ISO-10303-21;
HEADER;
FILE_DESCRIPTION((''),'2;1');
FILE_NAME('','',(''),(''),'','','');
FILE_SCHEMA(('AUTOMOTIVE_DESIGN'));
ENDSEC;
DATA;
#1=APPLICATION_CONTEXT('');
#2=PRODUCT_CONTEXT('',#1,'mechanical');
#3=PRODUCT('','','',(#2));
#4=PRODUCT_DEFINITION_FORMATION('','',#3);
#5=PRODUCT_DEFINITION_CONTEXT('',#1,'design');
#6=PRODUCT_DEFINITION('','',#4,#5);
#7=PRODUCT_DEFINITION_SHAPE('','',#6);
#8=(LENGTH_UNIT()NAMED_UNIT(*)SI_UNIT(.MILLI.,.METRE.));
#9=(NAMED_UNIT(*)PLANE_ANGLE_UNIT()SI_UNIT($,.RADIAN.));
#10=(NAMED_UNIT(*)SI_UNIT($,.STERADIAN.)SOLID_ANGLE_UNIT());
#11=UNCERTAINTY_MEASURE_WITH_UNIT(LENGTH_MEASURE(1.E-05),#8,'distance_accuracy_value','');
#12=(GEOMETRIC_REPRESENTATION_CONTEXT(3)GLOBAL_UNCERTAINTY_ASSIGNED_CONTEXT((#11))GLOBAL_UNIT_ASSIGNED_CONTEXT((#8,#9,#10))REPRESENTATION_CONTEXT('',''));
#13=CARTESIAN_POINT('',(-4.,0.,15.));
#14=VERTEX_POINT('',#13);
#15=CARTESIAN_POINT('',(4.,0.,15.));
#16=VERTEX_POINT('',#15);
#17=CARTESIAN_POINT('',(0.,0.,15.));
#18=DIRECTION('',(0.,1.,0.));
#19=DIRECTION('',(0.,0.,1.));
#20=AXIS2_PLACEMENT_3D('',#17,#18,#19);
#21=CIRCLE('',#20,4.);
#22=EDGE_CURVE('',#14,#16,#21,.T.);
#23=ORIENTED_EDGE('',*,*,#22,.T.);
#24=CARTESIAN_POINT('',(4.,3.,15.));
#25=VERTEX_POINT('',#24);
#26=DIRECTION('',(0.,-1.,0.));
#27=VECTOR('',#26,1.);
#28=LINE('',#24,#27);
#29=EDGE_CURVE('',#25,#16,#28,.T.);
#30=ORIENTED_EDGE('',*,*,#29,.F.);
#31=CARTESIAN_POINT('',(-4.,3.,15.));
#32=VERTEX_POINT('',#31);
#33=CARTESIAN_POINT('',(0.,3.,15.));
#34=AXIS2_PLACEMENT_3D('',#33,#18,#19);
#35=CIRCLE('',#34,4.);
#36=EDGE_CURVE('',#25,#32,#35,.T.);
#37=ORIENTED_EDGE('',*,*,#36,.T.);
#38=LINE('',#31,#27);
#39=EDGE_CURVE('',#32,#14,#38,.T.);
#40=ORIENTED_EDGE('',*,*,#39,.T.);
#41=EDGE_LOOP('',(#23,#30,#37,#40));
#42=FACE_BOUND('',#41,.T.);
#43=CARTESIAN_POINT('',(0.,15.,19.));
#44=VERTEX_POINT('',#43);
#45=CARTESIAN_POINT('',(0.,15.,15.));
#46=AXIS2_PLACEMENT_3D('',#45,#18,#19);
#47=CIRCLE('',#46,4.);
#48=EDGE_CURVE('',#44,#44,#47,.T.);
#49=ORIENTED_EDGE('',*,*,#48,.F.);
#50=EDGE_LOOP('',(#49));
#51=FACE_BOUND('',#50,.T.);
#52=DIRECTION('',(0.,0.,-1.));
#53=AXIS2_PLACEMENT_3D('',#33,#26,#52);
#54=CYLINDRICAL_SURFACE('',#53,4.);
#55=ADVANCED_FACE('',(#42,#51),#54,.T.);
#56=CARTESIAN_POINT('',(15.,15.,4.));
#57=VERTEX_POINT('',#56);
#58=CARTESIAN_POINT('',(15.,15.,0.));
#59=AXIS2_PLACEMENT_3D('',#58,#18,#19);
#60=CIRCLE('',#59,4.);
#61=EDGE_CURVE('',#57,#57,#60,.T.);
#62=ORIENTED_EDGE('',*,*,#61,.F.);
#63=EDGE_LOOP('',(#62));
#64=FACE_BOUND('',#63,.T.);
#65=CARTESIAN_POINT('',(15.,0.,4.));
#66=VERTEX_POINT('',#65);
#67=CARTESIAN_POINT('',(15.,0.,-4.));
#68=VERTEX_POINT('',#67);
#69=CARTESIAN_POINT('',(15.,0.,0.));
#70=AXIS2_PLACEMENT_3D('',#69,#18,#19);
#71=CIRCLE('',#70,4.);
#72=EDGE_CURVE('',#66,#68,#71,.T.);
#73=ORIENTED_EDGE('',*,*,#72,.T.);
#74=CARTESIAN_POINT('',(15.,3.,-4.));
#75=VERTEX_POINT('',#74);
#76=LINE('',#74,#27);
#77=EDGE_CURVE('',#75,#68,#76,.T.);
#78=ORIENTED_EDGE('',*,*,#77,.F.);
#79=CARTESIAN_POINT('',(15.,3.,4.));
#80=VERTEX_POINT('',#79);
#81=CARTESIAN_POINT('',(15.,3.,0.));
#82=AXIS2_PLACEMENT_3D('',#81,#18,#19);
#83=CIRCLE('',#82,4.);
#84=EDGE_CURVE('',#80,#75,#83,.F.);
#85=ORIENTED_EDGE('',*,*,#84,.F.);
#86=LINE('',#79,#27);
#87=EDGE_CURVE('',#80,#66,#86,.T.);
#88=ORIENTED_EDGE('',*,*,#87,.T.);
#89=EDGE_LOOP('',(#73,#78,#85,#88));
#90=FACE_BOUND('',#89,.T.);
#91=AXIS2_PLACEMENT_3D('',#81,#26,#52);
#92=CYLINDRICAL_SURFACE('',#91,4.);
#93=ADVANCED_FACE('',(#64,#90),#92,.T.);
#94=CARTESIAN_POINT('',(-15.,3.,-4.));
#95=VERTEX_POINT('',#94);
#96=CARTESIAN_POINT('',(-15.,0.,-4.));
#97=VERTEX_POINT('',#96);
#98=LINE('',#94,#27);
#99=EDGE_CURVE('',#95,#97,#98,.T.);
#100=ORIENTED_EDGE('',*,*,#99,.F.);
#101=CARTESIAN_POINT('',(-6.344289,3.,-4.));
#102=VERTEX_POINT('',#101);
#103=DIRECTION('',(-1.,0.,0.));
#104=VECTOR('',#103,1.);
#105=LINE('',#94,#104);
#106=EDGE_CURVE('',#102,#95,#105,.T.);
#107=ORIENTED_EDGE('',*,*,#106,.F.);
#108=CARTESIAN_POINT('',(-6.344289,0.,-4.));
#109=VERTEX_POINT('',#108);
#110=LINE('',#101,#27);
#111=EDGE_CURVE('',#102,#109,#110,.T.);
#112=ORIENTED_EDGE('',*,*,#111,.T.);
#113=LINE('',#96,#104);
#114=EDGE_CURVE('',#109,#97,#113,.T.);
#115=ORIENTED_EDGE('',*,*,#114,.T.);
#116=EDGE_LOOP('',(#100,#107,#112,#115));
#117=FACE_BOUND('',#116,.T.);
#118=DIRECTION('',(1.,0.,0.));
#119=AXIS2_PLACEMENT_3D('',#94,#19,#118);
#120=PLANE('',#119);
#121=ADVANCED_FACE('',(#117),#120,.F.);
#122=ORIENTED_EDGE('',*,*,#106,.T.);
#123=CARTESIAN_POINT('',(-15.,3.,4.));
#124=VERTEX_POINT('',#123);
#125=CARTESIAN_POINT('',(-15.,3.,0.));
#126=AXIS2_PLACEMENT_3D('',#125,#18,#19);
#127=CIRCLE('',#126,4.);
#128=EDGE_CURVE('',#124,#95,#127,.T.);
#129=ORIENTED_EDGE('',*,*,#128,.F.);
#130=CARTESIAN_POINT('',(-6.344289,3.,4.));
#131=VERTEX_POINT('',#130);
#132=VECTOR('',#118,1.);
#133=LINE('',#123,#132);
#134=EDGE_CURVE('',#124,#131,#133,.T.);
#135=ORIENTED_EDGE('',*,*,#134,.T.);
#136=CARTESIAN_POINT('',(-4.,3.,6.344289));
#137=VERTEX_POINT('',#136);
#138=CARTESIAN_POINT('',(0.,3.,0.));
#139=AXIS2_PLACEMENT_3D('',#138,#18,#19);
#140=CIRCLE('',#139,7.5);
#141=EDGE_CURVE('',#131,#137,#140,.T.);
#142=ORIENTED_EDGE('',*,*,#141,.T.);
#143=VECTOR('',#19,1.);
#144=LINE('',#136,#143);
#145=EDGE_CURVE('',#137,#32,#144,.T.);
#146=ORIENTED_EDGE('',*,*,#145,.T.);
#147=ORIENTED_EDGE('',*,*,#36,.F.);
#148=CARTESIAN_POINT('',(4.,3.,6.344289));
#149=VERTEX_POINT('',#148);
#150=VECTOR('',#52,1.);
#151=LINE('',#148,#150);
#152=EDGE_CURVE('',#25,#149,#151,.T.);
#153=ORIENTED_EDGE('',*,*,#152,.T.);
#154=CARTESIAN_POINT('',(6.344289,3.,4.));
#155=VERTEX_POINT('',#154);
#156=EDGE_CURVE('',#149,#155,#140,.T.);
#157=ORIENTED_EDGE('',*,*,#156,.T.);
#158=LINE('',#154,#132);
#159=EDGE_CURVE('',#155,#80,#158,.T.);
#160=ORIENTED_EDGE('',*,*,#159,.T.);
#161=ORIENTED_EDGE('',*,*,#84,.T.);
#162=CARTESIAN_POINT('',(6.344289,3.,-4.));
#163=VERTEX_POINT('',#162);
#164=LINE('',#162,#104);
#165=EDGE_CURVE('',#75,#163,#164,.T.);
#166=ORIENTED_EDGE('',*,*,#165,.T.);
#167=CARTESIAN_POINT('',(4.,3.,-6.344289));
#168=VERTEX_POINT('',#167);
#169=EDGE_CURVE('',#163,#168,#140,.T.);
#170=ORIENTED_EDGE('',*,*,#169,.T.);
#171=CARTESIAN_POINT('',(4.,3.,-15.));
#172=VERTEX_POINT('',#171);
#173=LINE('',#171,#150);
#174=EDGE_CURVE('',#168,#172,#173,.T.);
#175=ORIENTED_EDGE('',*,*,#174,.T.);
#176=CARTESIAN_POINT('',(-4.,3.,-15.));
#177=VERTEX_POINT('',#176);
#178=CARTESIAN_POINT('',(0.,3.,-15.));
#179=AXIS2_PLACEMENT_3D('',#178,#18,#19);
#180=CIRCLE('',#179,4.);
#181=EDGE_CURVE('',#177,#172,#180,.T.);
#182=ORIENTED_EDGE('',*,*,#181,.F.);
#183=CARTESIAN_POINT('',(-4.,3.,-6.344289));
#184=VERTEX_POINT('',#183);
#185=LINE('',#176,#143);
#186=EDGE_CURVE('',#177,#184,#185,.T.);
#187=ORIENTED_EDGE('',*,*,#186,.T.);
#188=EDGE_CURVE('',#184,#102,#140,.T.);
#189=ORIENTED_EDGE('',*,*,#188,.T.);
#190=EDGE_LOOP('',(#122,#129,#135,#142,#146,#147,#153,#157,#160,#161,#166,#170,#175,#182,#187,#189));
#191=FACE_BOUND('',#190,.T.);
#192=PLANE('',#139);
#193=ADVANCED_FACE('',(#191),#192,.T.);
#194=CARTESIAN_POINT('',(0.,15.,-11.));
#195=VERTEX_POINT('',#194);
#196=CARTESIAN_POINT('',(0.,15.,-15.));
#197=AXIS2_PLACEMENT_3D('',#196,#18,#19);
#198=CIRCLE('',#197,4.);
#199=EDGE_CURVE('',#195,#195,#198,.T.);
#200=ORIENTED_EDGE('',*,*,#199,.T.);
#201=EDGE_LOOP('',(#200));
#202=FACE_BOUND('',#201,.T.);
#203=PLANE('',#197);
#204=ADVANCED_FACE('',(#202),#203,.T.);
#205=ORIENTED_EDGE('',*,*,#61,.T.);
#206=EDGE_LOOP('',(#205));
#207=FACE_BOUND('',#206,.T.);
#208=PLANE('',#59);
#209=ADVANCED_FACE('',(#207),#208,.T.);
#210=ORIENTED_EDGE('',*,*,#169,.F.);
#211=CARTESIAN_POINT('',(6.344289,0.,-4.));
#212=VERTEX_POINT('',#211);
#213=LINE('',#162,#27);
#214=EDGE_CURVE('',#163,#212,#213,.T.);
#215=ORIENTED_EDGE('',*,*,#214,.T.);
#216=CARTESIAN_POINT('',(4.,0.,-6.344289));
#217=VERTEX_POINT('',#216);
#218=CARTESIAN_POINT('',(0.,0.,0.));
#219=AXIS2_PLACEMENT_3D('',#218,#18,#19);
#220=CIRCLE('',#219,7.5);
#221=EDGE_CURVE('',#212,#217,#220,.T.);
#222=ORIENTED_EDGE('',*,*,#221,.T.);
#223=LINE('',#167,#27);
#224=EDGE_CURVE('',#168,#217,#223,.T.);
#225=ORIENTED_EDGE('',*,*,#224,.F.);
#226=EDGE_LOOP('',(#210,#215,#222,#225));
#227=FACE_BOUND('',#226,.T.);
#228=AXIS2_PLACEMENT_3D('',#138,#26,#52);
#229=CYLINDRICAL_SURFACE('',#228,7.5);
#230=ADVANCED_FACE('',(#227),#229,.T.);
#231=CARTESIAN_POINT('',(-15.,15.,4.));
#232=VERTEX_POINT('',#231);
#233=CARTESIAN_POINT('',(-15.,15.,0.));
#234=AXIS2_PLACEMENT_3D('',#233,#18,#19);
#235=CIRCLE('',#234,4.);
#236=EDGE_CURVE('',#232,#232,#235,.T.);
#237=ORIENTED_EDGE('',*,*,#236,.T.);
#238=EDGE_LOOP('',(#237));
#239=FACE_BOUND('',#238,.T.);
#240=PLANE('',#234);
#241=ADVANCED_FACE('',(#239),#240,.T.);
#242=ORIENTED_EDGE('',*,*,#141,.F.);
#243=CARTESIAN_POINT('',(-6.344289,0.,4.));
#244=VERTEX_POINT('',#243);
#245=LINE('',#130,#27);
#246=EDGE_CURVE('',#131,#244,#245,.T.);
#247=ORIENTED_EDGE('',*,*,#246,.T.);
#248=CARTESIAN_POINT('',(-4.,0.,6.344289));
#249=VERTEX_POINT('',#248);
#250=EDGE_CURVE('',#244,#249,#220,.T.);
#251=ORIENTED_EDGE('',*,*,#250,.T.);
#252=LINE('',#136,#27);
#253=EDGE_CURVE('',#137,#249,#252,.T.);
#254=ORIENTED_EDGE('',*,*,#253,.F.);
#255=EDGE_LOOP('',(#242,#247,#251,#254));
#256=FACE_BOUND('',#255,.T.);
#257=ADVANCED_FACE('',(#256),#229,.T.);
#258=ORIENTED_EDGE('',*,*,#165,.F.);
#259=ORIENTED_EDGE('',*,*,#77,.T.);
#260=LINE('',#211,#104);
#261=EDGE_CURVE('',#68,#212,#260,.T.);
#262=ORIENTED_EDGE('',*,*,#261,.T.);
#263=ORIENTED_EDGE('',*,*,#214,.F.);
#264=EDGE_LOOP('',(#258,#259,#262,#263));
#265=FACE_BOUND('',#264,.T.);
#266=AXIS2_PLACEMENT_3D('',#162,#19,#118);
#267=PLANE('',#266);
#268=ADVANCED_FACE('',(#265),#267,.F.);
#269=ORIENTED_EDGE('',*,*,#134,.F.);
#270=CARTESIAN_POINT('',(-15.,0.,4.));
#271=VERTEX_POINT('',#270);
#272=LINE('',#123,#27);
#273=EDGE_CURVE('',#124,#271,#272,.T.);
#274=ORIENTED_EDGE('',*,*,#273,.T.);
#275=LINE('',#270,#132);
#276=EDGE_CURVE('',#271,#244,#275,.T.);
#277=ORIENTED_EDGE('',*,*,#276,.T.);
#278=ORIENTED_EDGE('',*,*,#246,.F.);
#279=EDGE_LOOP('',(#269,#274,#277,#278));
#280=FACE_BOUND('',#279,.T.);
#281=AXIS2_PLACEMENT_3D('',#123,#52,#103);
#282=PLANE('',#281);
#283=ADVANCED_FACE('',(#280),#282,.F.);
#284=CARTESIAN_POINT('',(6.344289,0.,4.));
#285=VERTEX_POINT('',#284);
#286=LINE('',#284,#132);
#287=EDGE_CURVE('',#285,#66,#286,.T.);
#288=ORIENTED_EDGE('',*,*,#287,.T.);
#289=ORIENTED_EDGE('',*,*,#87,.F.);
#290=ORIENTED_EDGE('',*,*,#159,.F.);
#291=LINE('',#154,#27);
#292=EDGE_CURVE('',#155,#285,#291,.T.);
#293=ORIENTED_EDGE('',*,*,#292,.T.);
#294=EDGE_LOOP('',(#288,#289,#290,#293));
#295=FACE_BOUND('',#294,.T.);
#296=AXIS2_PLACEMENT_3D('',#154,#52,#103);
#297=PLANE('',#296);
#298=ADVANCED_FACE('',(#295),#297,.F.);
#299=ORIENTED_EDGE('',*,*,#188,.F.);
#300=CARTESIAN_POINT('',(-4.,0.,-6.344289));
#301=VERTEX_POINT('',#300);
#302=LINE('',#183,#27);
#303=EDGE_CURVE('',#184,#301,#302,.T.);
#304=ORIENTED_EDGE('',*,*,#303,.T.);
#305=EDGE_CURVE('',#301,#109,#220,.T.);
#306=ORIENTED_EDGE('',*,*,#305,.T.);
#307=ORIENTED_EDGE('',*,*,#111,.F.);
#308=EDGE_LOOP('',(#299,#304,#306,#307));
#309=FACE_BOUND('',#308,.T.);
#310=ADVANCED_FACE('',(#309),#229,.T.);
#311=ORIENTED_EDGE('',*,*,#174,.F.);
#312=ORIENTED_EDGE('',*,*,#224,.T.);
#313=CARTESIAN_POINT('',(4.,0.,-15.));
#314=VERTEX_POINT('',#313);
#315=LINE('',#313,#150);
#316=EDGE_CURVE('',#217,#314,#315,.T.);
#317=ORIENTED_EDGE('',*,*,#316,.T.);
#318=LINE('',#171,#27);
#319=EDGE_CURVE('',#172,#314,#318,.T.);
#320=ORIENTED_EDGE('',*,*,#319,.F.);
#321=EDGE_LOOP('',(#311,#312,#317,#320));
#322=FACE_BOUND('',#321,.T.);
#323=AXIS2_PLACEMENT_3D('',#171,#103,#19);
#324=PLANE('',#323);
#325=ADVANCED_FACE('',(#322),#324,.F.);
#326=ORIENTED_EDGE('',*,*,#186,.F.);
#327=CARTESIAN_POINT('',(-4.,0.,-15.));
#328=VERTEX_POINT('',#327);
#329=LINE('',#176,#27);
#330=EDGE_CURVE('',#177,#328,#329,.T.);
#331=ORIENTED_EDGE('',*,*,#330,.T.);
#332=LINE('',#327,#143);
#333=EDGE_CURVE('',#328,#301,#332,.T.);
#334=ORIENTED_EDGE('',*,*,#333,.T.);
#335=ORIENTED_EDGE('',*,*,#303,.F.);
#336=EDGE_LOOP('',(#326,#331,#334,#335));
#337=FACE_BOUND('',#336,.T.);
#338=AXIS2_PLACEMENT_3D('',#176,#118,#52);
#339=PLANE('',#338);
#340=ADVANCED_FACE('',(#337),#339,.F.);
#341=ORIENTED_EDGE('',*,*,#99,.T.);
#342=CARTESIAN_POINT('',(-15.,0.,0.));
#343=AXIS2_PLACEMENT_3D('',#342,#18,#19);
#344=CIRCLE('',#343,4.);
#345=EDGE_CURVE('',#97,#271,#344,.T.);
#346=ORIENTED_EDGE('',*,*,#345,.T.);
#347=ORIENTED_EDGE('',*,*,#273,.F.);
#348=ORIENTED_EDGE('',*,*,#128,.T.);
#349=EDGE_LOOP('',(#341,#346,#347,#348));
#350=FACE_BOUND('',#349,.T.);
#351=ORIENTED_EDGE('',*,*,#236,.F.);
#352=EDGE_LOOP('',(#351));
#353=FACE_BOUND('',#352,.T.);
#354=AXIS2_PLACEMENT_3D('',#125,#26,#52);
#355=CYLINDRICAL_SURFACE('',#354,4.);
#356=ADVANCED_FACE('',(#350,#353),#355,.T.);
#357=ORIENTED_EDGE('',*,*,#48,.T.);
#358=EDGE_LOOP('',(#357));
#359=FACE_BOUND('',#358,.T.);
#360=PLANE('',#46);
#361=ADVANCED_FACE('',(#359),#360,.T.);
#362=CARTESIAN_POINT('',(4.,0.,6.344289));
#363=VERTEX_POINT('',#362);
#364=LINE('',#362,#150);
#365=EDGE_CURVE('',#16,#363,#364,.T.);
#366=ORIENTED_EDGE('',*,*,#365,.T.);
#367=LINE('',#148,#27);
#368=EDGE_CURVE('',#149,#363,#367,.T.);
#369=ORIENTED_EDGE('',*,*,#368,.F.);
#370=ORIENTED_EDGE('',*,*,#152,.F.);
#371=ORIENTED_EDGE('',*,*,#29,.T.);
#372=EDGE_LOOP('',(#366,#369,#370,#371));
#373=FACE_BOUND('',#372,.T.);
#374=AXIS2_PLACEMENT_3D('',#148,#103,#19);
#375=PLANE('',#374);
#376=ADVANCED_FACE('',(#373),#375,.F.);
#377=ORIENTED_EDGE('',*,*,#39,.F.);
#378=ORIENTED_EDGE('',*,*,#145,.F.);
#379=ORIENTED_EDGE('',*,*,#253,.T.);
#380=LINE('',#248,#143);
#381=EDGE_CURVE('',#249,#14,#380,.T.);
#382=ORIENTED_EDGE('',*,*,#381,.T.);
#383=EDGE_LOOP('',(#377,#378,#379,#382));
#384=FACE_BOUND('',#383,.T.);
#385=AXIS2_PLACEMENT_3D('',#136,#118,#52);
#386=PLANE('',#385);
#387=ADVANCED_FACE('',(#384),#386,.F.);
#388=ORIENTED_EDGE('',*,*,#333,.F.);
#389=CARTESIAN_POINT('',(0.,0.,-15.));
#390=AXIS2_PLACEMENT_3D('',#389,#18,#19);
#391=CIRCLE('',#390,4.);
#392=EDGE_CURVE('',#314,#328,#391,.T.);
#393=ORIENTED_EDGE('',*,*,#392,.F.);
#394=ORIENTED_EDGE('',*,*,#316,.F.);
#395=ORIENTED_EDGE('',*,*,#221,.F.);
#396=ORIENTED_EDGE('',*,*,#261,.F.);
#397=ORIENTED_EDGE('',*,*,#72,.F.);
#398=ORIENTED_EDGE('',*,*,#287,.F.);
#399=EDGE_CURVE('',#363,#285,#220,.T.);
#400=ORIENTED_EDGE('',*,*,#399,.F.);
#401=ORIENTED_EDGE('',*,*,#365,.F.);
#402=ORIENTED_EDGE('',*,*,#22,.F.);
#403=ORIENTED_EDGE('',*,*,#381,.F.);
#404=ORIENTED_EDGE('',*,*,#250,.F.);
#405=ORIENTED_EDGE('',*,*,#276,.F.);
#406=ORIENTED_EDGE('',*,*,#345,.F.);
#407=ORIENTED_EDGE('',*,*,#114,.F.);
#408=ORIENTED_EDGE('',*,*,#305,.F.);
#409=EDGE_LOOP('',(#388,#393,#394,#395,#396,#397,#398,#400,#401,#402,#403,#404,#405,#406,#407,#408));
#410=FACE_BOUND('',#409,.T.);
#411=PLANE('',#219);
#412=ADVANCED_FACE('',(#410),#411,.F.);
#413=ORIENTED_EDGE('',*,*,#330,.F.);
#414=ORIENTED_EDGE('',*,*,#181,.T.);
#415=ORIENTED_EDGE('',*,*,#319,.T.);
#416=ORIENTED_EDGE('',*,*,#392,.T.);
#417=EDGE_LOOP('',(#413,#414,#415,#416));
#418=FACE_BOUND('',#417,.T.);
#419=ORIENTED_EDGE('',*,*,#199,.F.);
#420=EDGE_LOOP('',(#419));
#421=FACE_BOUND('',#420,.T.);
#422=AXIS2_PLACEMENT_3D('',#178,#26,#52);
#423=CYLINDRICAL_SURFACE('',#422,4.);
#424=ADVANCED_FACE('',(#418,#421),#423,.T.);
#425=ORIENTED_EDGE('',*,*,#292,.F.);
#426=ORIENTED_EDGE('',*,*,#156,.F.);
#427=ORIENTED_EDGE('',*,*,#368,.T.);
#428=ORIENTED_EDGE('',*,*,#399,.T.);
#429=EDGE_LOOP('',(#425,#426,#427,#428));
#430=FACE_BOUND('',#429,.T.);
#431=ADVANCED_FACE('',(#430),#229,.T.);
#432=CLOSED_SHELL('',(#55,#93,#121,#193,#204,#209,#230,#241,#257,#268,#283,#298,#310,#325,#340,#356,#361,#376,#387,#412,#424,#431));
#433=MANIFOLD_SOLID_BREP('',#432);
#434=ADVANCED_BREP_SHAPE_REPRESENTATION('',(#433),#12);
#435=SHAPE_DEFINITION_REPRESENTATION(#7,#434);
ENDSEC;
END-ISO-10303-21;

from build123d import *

# Parameters (mm, degrees)
BOSS_EXTRUDE1_DEPTH = 3
SKETCH2_R           = 4
BOSS_EXTRUDE2_DEPTH = 12


with BuildPart() as part:
    # Sketch1 → Boss-Extrude1 (new body)
    with BuildSketch(Plane(origin=(0, 0, 0), x_dir=(1, 0, 0), z_dir=(0, 1, 0))):
        with BuildLine():
            Line((-15, 4), (-6.34428877, 4))
            ThreePointArc((-6.34428877, 4), (-5.303300859, 5.303300859), (-4, 6.34428877))
            Line((-4, 6.34428877), (-4, 15))
            ThreePointArc((-4, 15), (0, 19), (4, 15))
            Line((4, 15), (4, 6.34428877))
            ThreePointArc((4, 6.34428877), (5.303300859, 5.303300859), (6.34428877, 4))
            Line((6.34428877, 4), (15, 4))
            ThreePointArc((15, 4), (19, 0), (15, -4))
            Line((15, -4), (6.34428877, -4))
            ThreePointArc((6.34428877, -4), (5.303300859, -5.303300859), (4, -6.34428877))
            Line((4, -6.34428877), (4, -15))
            ThreePointArc((4, -15), (0, -19), (-4, -15))
            Line((-4, -15), (-4, -6.34428877))
            ThreePointArc((-4, -6.34428877), (-5.303300859, -5.303300859), (-6.34428877, -4))
            Line((-6.34428877, -4), (-15, -4))
            ThreePointArc((-15, -4), (-19, 0), (-15, 4))
        make_face()
    extrude(amount=BOSS_EXTRUDE1_DEPTH)

    # Sketch2 → Boss-Extrude2 (add)
    with BuildSketch(Plane(origin=(0, 3, 0), x_dir=(1, 0, 0), z_dir=(0, 1, 0))):
        with Locations((-15, 0)):
            Circle(SKETCH2_R)
        with Locations((15, 0)):
            Circle(SKETCH2_R)
        with Locations((0, -15)):
            Circle(SKETCH2_R)
        with Locations((0, 15)):
            Circle(SKETCH2_R)
    extrude(amount=BOSS_EXTRUDE2_DEPTH)


solid = part.part
